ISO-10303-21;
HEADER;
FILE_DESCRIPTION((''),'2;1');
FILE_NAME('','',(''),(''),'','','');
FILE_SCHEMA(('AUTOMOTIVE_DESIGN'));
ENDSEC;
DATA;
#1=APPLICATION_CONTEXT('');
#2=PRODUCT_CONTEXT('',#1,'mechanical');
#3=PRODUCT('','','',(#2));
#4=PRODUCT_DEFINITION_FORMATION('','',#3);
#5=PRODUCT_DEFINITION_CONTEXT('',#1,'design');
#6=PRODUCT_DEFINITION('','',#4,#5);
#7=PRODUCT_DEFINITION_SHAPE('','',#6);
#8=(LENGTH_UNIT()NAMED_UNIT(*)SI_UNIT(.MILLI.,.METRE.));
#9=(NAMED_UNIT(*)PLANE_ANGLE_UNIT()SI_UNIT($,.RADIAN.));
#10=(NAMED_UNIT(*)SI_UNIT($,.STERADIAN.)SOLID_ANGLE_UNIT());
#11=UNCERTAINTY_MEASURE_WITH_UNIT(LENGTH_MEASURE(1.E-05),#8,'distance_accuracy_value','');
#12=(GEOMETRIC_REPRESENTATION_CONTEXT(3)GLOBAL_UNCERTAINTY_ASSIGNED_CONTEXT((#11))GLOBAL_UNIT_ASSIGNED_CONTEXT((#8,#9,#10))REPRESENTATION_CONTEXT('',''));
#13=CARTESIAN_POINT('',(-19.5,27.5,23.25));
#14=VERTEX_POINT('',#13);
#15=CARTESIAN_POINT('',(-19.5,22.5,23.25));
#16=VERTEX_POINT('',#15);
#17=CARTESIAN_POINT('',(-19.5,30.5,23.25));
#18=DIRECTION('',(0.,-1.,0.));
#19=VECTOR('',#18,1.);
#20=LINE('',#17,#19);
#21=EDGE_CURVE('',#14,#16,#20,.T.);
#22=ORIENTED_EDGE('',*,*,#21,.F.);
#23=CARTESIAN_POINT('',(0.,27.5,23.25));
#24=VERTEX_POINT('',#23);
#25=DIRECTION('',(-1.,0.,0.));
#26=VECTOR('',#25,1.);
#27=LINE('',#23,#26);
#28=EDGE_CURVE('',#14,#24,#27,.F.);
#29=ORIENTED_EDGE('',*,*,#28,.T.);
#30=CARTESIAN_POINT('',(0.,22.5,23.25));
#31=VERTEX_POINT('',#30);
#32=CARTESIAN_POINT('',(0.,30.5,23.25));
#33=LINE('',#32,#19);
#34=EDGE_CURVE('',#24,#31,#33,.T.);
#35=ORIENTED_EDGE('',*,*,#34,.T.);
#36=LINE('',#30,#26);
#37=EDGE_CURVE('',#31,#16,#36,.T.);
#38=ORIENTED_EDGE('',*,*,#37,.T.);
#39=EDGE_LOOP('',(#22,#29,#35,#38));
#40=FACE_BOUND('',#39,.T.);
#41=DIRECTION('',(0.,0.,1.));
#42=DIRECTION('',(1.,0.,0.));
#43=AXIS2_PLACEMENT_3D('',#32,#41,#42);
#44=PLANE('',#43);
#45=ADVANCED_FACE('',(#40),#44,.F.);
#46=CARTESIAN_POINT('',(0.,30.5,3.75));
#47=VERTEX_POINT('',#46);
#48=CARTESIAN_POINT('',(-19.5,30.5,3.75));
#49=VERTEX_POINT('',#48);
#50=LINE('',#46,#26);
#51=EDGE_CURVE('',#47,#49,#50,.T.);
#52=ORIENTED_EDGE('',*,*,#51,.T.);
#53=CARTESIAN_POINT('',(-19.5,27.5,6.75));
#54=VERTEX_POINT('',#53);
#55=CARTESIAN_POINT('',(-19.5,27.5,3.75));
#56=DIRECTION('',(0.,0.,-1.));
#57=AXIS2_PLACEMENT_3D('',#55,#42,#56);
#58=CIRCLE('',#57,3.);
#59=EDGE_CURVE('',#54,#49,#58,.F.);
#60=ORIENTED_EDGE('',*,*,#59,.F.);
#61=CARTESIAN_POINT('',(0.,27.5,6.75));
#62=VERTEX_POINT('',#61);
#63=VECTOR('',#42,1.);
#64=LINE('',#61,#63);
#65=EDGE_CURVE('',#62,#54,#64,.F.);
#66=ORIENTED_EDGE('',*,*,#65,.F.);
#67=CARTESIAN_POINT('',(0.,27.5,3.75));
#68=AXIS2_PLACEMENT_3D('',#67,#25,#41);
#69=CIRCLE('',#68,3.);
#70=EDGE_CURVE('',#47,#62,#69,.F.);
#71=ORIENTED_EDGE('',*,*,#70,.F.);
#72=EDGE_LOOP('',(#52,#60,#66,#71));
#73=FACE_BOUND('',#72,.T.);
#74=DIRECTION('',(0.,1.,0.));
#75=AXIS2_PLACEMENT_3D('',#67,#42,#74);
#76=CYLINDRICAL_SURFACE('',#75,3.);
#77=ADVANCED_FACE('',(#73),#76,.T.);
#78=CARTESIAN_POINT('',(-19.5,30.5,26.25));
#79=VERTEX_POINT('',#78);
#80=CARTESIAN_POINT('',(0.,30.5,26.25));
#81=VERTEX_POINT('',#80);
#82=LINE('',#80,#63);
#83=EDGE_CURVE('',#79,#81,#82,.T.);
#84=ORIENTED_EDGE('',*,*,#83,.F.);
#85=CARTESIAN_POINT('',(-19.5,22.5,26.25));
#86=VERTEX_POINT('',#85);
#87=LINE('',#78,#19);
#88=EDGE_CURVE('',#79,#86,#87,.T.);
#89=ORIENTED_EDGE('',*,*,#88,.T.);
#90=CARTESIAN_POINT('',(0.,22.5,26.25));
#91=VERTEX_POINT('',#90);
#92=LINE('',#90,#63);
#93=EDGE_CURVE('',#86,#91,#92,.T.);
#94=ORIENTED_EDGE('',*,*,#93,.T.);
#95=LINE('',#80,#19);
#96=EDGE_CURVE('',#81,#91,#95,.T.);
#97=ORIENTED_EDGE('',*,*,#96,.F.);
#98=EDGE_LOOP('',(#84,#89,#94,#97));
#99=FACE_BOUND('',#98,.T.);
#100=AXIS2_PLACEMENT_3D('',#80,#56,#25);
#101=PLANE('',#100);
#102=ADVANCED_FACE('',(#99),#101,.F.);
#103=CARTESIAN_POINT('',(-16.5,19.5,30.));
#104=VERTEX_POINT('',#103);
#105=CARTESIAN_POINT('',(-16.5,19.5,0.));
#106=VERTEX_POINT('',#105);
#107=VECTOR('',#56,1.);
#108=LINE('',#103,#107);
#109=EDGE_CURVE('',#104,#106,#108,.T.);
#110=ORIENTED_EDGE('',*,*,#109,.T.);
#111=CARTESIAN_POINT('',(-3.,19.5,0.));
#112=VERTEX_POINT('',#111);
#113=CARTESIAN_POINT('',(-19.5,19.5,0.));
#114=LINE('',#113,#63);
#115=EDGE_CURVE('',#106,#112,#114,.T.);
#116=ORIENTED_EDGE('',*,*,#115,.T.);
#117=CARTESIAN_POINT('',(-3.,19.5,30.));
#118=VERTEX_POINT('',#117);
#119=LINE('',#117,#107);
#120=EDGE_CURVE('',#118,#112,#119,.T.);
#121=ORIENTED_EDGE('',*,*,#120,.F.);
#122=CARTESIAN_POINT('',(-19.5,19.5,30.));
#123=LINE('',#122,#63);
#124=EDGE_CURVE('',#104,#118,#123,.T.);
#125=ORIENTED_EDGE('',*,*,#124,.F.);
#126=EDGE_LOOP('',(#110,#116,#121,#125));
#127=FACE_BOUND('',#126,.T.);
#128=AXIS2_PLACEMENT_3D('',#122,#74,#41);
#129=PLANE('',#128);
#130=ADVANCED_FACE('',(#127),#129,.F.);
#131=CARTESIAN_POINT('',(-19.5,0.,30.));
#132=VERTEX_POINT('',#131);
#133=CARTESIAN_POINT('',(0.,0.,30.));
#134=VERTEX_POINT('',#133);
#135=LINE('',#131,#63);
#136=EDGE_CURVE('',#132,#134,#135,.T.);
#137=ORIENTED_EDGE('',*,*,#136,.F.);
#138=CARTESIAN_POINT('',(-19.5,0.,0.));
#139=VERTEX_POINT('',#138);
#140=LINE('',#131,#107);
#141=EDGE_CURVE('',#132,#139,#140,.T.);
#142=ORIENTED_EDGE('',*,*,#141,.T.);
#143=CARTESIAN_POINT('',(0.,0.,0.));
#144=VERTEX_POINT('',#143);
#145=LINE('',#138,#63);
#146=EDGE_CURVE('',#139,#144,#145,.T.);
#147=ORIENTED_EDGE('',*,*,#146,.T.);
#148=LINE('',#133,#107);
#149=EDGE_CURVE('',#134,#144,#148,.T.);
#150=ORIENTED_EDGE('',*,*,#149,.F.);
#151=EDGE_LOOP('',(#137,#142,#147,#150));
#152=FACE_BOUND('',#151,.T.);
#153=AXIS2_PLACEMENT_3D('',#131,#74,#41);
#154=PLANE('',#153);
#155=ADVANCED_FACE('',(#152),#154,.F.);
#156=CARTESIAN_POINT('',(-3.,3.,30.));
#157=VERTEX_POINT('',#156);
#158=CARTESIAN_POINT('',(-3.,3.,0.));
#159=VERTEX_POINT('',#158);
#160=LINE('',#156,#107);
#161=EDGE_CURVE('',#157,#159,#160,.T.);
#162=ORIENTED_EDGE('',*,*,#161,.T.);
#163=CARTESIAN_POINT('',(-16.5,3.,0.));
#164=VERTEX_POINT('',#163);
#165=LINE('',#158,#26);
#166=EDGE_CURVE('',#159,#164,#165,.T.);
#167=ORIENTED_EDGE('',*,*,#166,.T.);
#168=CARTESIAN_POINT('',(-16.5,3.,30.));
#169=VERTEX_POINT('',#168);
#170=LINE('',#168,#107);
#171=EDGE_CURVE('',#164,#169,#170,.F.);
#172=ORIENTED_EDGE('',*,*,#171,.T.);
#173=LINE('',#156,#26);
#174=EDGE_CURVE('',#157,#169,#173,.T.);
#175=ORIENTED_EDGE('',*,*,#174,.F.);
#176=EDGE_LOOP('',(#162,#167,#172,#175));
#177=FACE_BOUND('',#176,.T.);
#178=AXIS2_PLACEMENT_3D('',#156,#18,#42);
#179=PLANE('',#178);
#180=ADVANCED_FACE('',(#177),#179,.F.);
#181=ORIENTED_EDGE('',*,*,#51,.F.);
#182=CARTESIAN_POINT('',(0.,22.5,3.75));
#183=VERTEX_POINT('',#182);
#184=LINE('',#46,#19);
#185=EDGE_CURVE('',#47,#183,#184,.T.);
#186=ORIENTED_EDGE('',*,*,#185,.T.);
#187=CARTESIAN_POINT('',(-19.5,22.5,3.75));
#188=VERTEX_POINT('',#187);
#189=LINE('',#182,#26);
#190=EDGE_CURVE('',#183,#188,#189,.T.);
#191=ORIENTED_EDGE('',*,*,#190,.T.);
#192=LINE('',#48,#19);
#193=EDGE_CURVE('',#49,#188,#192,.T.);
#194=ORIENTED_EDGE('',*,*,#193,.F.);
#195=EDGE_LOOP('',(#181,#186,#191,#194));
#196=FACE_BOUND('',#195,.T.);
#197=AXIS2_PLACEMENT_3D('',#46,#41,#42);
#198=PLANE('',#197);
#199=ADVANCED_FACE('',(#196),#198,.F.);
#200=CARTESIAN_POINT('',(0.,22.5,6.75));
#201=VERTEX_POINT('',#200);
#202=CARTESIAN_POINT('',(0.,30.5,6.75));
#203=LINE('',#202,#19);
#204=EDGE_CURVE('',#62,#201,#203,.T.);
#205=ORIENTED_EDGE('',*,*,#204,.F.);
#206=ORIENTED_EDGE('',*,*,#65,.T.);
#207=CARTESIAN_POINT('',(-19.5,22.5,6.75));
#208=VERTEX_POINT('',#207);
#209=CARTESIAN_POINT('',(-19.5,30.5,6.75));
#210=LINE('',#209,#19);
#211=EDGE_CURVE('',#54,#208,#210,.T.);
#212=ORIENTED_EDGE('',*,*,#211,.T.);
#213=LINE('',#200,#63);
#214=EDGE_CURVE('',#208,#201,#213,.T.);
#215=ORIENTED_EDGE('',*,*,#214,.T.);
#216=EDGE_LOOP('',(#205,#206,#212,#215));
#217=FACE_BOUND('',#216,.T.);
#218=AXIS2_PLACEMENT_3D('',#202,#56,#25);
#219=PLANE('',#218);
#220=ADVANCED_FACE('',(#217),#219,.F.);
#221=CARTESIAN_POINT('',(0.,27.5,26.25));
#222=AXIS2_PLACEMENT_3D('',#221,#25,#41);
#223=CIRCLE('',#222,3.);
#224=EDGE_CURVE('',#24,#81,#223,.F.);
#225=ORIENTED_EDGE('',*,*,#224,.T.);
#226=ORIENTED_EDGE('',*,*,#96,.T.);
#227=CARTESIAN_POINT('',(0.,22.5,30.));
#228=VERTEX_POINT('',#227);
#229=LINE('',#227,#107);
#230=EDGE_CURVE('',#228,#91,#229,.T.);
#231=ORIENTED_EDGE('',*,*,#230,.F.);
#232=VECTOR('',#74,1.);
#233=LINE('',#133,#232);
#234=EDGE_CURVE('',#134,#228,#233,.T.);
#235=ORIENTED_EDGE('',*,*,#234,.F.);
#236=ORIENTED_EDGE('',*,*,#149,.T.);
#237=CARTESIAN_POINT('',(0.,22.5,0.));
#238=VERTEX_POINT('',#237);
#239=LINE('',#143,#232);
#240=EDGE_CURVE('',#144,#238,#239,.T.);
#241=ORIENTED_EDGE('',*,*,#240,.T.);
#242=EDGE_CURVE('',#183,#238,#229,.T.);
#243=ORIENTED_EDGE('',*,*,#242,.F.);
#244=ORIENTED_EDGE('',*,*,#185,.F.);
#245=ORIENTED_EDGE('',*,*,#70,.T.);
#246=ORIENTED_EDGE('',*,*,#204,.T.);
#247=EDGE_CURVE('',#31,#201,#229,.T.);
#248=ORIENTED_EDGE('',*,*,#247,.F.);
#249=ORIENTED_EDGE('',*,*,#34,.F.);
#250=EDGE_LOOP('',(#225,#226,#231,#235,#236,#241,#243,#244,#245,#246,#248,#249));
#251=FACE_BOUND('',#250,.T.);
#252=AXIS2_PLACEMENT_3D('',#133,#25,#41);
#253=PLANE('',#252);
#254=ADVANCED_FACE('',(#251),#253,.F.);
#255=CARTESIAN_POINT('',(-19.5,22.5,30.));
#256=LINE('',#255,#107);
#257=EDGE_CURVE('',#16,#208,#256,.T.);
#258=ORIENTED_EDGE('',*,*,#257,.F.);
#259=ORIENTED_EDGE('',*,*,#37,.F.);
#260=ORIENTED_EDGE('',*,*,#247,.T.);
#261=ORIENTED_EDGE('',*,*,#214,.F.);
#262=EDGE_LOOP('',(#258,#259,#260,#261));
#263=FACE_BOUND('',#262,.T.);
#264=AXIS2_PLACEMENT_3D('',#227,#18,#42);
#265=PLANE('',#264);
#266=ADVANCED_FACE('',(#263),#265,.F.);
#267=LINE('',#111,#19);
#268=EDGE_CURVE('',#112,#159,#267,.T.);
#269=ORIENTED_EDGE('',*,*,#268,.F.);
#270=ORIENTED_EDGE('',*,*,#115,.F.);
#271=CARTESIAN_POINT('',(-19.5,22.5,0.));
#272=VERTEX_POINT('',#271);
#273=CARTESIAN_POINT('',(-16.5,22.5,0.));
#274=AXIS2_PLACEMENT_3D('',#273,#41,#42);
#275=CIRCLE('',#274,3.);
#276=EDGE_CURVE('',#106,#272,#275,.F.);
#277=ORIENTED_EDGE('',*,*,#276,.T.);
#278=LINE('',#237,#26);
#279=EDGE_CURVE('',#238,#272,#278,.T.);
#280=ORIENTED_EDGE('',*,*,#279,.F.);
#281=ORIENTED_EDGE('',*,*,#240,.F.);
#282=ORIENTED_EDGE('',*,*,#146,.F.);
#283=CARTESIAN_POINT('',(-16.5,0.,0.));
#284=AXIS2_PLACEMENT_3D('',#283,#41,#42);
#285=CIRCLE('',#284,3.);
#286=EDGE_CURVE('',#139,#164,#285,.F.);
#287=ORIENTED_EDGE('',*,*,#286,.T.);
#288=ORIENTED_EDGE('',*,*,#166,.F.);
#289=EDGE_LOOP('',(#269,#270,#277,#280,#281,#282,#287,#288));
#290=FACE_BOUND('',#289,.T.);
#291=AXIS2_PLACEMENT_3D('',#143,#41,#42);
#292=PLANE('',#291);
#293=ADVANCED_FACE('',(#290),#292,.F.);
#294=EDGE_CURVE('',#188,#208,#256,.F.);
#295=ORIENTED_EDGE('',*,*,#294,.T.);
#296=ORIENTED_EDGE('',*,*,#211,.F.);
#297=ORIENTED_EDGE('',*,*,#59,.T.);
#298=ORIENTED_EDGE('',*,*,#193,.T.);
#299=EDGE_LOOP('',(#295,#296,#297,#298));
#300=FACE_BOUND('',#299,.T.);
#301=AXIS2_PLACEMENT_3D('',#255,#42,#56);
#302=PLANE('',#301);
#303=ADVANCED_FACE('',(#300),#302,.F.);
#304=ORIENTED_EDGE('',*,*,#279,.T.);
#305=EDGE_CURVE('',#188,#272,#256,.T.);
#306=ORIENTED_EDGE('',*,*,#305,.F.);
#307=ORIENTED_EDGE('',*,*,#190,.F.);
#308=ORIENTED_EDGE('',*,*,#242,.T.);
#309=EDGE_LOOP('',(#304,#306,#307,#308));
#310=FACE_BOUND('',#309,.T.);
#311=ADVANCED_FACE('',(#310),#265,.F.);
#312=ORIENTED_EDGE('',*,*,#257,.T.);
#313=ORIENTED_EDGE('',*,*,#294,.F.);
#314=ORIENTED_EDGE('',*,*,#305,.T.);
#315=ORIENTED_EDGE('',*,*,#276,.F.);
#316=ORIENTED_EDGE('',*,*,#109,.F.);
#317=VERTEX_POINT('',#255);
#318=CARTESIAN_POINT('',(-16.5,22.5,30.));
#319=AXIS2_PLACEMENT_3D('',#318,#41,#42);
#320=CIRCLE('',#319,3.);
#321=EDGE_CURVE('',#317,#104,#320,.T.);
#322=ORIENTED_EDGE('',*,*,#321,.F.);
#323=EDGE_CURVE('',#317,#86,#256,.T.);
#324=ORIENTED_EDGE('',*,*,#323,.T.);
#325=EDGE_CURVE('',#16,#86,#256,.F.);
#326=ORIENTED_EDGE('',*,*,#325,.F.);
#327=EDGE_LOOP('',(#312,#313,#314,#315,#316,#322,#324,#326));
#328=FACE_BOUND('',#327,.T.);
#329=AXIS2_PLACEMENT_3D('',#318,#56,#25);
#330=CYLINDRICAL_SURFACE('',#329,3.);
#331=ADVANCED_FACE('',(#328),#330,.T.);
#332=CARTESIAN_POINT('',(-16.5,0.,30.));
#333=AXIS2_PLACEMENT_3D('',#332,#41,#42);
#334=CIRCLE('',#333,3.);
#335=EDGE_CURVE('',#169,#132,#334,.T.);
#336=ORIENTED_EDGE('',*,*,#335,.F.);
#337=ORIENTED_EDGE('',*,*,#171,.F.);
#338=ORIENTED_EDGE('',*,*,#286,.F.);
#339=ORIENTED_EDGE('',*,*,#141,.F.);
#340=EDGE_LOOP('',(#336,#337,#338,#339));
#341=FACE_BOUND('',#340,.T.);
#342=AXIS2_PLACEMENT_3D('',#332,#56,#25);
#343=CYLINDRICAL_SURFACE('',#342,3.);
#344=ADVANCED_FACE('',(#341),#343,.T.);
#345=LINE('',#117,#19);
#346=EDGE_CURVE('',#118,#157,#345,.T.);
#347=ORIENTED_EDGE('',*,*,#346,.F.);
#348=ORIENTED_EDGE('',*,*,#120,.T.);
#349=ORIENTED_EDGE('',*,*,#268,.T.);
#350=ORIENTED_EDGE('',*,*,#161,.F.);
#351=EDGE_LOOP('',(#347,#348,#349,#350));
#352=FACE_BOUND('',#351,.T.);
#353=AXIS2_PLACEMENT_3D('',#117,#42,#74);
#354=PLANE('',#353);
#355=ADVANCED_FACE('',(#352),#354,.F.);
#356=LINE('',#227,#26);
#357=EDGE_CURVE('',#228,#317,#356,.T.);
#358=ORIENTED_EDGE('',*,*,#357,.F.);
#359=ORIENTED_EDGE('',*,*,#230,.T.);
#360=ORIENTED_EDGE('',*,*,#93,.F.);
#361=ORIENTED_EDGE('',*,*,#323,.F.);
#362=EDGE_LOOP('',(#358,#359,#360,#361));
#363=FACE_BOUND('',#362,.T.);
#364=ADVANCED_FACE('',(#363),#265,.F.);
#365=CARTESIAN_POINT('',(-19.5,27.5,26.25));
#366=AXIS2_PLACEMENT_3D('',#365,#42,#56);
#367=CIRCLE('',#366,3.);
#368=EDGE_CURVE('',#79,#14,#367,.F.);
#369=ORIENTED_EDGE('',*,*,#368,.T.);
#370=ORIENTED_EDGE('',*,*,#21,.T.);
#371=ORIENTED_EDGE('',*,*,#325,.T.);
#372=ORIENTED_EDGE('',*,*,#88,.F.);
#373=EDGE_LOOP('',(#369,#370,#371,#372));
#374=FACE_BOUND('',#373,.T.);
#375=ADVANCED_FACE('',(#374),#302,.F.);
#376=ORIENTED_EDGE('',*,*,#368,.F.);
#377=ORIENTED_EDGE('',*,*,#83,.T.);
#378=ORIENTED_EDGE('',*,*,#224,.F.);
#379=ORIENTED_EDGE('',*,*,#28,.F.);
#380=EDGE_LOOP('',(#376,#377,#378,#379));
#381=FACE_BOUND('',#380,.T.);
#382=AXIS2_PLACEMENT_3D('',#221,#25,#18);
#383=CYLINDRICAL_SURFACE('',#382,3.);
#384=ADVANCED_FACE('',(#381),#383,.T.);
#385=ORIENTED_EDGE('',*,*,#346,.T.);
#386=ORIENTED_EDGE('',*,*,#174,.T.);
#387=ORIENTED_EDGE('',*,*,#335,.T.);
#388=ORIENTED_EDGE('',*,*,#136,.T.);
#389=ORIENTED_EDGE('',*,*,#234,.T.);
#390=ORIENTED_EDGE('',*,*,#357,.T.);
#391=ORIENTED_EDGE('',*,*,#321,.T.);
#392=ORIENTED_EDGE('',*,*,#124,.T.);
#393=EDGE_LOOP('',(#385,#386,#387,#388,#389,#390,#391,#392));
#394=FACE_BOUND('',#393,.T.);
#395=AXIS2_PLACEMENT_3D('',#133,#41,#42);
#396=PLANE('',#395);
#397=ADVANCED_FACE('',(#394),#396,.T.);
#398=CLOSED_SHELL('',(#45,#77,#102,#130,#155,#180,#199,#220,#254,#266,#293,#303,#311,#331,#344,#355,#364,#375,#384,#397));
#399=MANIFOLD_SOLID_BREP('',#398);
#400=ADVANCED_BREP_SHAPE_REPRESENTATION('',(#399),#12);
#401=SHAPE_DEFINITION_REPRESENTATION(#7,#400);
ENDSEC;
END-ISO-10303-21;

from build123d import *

# Parameters (mm, degrees)
BOSS_EXTRUDE1_DEPTH = 30
SKETCH2_W           = 19.5
SKETCH2_H           = 3
BOSS_EXTRUDE2_DEPTH = 8
FILLET1_R           = 3
FILLET2_R           = 3
FILLET3_R           = 3
FILLET4_R           = 3


with BuildPart() as part:
    # Sketch1 → Boss-Extrude1 (new body)
    with BuildSketch(Plane.XY):
        Polygon((0, 0), (0, 22.5), (-19.5, 22.5), (-19.5, 19.5), (-3, 19.5), (-3, 3), (-19.5, 3), (-19.5, 0), align=None)
    extrude(amount=BOSS_EXTRUDE1_DEPTH)

    # Sketch2 → Boss-Extrude2 (add)
    with BuildSketch(Plane(origin=(0, 22.5, 0), x_dir=(1, 0, 0), z_dir=(0, 1, 0))):
        with Locations((-9.75, -5.25)):
            Rectangle(SKETCH2_W, SKETCH2_H)
        with Locations((-9.75, -24.75)):
            Rectangle(SKETCH2_W, SKETCH2_H)
    extrude(amount=BOSS_EXTRUDE2_DEPTH)

    # Fillet1
    fillet1_edges = [part.edges().sort_by_distance(p)[0] for p in [
        (-9.75, 30.5, 6.75),
    ]]
    fillet(fillet1_edges, radius=FILLET1_R - 0.0001)  # a hair under: the kernel refuses the full size

    # Fillet2
    fillet2_edges = [part.edges().sort_by_distance(p)[0] for p in [
        (-9.75, 30.5, 23.25),
    ]]
    fillet(fillet2_edges, radius=FILLET2_R - 0.0001)  # a hair under: the kernel refuses the full size

    # Fillet3
    fillet3_edges = [part.edges().sort_by_distance(p)[0] for p in [
        (-19.5, 19.5, 15),
    ]]
    fillet(fillet3_edges, radius=FILLET3_R - 0.0001)  # a hair under: the kernel refuses the full size

    # Fillet4
    fillet4_edges = [part.edges().sort_by_distance(p)[0] for p in [
        (-19.5, 3, 15),
    ]]
    fillet(fillet4_edges, radius=FILLET4_R - 0.0001)  # a hair under: the kernel refuses the full size


solid = part.part
